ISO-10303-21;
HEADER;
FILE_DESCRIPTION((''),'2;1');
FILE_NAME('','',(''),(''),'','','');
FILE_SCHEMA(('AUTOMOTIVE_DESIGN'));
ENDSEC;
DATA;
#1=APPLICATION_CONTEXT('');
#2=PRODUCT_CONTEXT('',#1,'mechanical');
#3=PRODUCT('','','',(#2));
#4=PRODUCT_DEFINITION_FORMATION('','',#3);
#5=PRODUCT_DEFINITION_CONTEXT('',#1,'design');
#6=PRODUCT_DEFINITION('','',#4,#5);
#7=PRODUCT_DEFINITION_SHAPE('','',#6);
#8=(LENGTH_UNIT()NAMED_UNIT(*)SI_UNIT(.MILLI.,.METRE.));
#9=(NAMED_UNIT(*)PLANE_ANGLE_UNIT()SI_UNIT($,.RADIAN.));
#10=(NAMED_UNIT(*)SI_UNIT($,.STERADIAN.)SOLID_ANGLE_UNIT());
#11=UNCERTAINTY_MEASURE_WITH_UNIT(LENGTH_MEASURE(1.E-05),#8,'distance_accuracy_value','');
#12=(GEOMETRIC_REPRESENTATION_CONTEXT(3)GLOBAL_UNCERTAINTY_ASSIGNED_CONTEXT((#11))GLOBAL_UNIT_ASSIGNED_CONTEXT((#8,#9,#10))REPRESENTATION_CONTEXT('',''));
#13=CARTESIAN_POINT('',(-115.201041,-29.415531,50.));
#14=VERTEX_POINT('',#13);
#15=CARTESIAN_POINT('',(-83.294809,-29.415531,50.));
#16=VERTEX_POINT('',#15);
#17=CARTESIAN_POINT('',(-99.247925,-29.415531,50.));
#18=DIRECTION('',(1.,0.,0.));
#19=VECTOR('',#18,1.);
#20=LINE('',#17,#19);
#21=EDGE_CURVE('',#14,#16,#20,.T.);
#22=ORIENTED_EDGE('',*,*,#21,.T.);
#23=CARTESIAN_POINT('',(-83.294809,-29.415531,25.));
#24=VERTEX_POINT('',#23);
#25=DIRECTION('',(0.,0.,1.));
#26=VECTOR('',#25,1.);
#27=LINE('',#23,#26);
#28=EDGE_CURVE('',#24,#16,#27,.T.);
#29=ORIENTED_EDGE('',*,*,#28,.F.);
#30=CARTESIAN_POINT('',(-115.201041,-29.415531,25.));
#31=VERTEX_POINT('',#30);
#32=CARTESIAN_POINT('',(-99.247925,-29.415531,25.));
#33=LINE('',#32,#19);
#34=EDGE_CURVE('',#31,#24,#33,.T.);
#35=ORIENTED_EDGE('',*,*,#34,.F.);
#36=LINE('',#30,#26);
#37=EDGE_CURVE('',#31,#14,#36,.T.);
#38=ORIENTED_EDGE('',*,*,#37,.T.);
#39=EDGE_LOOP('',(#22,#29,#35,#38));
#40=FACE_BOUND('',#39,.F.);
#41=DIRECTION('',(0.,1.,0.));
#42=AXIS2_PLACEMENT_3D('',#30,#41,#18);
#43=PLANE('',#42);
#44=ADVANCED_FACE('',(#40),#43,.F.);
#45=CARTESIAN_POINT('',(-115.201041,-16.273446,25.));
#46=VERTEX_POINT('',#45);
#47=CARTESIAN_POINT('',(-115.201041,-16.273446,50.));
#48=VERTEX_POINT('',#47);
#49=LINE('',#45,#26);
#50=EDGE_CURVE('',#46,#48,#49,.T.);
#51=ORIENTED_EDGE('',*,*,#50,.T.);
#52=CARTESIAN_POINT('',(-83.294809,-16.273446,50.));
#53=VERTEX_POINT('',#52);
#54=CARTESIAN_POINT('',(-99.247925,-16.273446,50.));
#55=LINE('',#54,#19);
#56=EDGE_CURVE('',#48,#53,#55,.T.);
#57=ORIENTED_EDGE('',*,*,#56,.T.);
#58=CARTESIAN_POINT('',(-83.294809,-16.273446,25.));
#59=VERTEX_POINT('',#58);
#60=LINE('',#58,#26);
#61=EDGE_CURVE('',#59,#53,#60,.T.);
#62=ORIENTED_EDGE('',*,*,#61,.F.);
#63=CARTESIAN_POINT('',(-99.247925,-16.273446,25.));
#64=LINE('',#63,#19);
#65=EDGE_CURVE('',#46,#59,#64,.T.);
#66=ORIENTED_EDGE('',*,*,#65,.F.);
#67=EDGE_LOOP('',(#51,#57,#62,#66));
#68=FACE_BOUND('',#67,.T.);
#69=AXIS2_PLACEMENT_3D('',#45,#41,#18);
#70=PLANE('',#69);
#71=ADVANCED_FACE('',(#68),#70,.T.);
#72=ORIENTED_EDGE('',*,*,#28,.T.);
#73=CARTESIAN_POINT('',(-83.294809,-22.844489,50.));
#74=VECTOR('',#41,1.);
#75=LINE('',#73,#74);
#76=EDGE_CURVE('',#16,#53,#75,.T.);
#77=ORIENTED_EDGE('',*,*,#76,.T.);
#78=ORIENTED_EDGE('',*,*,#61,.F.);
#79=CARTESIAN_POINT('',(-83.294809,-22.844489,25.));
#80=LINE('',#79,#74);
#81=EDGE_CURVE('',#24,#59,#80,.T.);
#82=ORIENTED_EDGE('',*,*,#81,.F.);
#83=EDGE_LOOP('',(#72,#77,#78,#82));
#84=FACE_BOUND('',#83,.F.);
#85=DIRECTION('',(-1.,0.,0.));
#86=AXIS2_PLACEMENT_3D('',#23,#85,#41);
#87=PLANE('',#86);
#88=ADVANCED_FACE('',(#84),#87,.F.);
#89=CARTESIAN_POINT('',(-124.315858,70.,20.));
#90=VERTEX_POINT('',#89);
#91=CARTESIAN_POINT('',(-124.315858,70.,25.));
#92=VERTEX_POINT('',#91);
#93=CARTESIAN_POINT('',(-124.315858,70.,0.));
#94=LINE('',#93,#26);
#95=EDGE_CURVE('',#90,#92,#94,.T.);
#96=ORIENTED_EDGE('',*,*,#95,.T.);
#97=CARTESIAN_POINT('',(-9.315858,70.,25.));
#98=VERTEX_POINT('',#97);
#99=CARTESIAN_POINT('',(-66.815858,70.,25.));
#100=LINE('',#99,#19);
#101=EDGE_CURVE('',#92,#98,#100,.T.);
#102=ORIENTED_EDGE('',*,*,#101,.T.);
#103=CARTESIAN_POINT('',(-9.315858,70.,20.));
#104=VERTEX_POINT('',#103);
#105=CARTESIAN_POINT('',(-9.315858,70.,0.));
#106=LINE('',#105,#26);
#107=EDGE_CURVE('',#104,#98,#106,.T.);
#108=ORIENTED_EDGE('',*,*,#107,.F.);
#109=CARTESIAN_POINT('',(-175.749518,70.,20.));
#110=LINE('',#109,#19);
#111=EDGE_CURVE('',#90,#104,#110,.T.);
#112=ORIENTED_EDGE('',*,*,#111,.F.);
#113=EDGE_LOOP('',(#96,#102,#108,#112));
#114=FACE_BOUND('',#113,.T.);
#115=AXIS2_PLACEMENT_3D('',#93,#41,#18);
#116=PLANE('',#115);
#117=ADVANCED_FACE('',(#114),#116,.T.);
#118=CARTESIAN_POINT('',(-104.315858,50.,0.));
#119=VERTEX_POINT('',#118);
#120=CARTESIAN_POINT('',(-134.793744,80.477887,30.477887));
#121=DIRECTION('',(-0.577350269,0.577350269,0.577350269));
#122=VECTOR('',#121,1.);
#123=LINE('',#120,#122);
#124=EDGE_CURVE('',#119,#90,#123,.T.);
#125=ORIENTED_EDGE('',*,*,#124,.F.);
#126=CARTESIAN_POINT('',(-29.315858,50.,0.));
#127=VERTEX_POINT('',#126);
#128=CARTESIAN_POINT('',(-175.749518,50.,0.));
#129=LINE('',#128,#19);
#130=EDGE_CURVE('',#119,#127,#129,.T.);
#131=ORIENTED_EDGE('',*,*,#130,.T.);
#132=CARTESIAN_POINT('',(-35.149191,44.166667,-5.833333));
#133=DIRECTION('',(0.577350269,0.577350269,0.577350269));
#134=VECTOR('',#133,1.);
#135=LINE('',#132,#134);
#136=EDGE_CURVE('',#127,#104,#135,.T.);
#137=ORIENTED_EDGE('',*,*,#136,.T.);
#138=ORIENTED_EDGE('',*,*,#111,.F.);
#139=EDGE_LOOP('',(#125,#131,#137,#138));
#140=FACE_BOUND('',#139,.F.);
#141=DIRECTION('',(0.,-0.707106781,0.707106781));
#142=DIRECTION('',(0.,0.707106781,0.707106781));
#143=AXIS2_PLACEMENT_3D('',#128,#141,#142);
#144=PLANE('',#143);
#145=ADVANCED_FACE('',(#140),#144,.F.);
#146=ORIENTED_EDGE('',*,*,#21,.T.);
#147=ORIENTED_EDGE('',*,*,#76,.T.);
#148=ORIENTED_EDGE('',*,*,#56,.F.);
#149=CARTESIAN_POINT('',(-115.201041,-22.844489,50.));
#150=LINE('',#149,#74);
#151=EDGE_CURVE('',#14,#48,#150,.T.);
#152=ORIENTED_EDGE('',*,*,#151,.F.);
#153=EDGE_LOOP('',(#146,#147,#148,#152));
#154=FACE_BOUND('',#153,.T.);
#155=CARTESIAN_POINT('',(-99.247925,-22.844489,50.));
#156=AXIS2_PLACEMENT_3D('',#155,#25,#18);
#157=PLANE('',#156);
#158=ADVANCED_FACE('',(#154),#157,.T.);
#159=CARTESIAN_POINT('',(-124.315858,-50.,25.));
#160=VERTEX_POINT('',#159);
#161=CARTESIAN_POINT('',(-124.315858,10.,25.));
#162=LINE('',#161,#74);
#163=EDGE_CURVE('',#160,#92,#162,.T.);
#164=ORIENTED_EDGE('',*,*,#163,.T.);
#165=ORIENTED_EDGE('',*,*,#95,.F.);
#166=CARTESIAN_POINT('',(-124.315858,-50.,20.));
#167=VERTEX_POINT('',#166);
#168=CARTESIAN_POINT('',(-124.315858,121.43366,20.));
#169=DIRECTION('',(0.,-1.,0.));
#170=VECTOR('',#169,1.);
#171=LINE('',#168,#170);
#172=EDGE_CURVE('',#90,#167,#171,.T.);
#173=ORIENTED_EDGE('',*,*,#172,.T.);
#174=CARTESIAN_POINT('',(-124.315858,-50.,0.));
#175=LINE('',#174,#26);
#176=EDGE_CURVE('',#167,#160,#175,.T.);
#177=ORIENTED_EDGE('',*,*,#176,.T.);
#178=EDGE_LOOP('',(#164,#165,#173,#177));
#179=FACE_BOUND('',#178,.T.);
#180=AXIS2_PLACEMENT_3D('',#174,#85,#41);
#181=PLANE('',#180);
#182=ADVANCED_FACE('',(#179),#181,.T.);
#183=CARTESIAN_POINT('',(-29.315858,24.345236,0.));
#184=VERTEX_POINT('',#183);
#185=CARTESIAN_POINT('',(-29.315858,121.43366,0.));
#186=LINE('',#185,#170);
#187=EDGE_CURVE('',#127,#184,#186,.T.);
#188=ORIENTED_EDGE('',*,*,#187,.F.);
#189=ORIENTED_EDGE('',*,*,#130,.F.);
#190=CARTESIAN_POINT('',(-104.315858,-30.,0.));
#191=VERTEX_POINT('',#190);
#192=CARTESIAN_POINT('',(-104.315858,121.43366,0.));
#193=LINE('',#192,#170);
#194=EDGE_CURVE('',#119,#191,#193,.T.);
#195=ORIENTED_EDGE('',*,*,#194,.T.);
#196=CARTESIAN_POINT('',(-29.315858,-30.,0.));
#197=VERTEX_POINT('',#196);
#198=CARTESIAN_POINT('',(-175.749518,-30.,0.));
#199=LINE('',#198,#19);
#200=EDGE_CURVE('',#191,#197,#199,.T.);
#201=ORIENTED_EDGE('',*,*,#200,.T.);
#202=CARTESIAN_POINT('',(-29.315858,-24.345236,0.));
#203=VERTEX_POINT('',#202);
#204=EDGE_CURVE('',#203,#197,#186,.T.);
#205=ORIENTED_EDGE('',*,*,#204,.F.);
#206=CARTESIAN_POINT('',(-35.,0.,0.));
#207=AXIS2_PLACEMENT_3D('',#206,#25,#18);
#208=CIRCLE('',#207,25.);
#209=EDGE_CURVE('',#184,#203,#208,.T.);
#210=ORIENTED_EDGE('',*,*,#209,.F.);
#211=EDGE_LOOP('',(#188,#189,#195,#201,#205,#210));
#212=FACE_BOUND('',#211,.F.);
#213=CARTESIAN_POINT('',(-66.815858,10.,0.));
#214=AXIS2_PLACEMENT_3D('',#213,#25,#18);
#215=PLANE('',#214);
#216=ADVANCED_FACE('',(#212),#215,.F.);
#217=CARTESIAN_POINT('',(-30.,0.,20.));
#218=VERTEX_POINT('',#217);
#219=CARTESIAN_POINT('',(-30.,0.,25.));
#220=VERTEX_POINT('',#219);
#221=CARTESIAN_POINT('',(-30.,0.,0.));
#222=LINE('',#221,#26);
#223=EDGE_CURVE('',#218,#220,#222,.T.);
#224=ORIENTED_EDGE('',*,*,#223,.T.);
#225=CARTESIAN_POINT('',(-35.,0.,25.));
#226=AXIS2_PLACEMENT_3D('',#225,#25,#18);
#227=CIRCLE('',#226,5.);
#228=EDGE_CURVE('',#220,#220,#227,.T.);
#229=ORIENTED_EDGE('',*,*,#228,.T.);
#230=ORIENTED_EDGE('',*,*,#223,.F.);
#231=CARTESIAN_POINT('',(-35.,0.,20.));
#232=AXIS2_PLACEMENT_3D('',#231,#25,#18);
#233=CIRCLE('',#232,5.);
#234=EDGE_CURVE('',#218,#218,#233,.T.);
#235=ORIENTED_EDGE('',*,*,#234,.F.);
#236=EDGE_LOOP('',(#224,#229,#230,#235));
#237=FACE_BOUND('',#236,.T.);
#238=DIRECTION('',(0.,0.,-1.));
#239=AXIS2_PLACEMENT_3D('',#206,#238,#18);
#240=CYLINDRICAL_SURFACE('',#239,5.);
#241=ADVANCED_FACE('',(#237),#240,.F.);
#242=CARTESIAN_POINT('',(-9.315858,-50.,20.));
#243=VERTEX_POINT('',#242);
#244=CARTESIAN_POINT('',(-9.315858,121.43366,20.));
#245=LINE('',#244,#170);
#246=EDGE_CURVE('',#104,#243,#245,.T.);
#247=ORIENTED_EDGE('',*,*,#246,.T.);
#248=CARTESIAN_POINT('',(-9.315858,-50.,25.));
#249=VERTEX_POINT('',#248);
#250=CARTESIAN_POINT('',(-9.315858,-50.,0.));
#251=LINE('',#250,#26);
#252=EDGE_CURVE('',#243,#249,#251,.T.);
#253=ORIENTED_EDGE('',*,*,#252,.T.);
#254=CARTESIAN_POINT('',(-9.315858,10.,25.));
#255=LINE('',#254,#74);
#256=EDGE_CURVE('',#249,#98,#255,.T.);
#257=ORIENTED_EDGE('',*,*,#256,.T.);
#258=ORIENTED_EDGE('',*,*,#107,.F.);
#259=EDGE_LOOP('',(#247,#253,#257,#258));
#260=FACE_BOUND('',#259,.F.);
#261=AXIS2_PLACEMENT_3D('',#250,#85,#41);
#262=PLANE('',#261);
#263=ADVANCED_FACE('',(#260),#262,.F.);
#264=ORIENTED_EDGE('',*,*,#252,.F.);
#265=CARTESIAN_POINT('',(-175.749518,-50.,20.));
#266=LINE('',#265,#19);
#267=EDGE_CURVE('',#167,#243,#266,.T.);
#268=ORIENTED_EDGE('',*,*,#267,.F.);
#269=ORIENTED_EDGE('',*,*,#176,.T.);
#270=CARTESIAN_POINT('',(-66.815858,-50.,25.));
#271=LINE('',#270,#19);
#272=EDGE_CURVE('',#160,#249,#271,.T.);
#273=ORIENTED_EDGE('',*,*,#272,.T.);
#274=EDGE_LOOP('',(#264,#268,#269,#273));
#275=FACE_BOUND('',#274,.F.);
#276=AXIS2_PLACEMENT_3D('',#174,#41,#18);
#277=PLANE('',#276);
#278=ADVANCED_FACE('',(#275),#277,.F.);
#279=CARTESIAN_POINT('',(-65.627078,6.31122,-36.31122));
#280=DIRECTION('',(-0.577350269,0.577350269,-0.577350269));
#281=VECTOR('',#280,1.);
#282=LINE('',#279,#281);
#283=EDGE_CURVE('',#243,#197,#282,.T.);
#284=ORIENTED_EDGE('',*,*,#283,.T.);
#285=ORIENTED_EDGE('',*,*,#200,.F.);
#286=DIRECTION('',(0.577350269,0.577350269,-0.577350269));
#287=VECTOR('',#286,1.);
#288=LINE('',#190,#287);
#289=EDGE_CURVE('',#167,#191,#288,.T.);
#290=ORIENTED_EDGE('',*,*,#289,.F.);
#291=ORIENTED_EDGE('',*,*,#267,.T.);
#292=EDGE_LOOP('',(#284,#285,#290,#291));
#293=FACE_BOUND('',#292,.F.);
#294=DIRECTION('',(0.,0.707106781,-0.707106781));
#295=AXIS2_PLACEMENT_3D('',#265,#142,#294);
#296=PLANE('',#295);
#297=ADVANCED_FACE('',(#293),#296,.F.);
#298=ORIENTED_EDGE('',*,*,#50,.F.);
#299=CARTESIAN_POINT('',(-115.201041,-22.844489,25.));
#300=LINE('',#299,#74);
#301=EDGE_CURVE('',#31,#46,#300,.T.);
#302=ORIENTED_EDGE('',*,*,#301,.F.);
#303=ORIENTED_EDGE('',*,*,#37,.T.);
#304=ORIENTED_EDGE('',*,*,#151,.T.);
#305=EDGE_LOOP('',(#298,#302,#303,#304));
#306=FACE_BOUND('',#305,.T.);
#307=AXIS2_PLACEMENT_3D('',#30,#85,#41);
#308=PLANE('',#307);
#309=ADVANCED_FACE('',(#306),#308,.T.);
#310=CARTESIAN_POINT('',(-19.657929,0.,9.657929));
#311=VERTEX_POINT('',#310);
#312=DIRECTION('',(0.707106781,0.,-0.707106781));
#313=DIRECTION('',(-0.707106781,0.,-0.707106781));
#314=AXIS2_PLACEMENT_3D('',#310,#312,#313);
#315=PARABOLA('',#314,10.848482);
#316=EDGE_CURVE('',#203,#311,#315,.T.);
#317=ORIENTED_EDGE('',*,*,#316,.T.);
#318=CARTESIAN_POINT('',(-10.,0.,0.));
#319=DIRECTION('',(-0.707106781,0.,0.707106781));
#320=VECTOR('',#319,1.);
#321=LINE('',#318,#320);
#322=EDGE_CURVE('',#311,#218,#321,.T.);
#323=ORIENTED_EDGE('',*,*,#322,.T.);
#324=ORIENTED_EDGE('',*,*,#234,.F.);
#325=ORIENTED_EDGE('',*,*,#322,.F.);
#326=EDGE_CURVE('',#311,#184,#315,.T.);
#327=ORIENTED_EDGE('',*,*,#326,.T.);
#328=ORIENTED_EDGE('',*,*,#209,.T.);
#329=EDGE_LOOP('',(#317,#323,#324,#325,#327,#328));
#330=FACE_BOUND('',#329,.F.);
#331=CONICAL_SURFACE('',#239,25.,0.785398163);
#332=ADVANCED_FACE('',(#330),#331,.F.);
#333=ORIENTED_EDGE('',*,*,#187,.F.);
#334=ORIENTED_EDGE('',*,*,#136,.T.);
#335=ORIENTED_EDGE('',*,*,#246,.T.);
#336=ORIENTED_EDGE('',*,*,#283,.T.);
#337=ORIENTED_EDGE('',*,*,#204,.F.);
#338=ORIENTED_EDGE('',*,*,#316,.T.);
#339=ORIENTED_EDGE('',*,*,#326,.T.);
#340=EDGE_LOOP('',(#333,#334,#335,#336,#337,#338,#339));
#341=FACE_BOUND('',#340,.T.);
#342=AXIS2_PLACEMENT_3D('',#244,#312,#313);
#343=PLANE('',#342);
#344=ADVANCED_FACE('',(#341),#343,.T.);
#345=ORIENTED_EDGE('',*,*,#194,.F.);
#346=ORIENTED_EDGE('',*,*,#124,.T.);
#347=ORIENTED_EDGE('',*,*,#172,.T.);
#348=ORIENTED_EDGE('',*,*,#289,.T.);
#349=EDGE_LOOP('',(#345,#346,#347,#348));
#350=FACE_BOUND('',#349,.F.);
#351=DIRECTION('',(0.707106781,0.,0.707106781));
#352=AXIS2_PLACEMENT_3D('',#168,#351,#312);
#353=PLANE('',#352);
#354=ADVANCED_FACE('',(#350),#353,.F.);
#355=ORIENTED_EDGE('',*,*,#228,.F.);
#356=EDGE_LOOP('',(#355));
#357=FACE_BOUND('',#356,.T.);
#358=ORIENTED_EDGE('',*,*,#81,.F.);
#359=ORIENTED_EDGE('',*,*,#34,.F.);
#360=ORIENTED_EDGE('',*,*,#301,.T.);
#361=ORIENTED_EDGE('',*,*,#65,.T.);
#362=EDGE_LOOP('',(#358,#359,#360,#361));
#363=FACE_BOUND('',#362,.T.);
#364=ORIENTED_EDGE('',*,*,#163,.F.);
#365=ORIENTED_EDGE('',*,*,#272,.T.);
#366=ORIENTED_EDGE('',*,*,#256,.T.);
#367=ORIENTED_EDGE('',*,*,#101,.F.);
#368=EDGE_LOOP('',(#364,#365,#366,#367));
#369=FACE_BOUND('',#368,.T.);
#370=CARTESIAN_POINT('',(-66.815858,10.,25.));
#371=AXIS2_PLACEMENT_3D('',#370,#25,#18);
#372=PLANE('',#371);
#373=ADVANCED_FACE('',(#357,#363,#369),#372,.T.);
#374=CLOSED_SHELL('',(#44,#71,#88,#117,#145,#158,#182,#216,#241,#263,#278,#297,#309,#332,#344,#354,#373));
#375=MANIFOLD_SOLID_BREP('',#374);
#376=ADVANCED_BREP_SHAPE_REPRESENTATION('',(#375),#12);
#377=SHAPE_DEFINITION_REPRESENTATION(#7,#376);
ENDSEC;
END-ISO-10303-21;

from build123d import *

# Parameters (mm, degrees)
F0_W        = 115
F0_H        = 120
F0_R        = 5
F1_DEPTH    = 25
F2_W        = 31.9062322378
F2_H        = 13.1420847028
F3_DEPTH    = 25
F4_T1_DEPTH = 217.8673195186
F4_T3_DEPTH = 222.8673195186


# Not quite as in the source:
# - a fillet or chamfer that OpenCascade refuses, or shapes differently, is made with other operations: its cross-section is extruded or revolved along the edge and cut away or added


with BuildPart() as f1:
    # F0 (on Top) → F1 (new body)
    with BuildSketch(Plane.XY):
        with Locations((-66.8158578873, 10)):
            Rectangle(F0_W, F0_H)
        with Locations((-35, 0)):
            Circle(F0_R, mode=Mode.SUBTRACT)
    extrude(amount=F1_DEPTH)

    # F2 (on face) → F3 (join)
    with BuildSketch(Plane.XY.offset(25)):
        with Locations((-99.2479249835, -22.8444887325)):
            Rectangle(F2_W, F2_H)
    extrude(amount=F3_DEPTH)

    # F4: chamfer of 20 on 5 edges, made by hand

    # F4_s2 → F4_t1 (cut)
    with BuildSketch(Plane.YZ.offset(-175.7495176466)):
        Polygon((-50, 20), (-30, 0), (-50, 0), align=None)
        Polygon((50, 0), (70, 20), (70, 0), align=None)
    extrude(amount=F4_T1_DEPTH, mode=Mode.SUBTRACT)

    # F4_s4 → F4_t3 (cut)
    with BuildSketch(Plane.XZ.offset(-121.4336597593)):
        Polygon((-9.3158578873, 20), (-29.3158578873, 0), (-9.3158578873, 0), align=None)
        Polygon((-124.3158578873, 20), (-104.3158578873, 0), (-124.3158578873, 0), align=None)
    extrude(amount=F4_T3_DEPTH, mode=Mode.SUBTRACT)

    # F4_s5 → F4_t6 (revolve, cut)
    with BuildSketch(Plane.XZ):
        Polygon((-10, 0), (-30, 20), (-30, 0), align=None)
    revolve(axis=Axis((-35, 0, 0), (0, 0, 1)), mode=Mode.SUBTRACT)


solid = f1.part
